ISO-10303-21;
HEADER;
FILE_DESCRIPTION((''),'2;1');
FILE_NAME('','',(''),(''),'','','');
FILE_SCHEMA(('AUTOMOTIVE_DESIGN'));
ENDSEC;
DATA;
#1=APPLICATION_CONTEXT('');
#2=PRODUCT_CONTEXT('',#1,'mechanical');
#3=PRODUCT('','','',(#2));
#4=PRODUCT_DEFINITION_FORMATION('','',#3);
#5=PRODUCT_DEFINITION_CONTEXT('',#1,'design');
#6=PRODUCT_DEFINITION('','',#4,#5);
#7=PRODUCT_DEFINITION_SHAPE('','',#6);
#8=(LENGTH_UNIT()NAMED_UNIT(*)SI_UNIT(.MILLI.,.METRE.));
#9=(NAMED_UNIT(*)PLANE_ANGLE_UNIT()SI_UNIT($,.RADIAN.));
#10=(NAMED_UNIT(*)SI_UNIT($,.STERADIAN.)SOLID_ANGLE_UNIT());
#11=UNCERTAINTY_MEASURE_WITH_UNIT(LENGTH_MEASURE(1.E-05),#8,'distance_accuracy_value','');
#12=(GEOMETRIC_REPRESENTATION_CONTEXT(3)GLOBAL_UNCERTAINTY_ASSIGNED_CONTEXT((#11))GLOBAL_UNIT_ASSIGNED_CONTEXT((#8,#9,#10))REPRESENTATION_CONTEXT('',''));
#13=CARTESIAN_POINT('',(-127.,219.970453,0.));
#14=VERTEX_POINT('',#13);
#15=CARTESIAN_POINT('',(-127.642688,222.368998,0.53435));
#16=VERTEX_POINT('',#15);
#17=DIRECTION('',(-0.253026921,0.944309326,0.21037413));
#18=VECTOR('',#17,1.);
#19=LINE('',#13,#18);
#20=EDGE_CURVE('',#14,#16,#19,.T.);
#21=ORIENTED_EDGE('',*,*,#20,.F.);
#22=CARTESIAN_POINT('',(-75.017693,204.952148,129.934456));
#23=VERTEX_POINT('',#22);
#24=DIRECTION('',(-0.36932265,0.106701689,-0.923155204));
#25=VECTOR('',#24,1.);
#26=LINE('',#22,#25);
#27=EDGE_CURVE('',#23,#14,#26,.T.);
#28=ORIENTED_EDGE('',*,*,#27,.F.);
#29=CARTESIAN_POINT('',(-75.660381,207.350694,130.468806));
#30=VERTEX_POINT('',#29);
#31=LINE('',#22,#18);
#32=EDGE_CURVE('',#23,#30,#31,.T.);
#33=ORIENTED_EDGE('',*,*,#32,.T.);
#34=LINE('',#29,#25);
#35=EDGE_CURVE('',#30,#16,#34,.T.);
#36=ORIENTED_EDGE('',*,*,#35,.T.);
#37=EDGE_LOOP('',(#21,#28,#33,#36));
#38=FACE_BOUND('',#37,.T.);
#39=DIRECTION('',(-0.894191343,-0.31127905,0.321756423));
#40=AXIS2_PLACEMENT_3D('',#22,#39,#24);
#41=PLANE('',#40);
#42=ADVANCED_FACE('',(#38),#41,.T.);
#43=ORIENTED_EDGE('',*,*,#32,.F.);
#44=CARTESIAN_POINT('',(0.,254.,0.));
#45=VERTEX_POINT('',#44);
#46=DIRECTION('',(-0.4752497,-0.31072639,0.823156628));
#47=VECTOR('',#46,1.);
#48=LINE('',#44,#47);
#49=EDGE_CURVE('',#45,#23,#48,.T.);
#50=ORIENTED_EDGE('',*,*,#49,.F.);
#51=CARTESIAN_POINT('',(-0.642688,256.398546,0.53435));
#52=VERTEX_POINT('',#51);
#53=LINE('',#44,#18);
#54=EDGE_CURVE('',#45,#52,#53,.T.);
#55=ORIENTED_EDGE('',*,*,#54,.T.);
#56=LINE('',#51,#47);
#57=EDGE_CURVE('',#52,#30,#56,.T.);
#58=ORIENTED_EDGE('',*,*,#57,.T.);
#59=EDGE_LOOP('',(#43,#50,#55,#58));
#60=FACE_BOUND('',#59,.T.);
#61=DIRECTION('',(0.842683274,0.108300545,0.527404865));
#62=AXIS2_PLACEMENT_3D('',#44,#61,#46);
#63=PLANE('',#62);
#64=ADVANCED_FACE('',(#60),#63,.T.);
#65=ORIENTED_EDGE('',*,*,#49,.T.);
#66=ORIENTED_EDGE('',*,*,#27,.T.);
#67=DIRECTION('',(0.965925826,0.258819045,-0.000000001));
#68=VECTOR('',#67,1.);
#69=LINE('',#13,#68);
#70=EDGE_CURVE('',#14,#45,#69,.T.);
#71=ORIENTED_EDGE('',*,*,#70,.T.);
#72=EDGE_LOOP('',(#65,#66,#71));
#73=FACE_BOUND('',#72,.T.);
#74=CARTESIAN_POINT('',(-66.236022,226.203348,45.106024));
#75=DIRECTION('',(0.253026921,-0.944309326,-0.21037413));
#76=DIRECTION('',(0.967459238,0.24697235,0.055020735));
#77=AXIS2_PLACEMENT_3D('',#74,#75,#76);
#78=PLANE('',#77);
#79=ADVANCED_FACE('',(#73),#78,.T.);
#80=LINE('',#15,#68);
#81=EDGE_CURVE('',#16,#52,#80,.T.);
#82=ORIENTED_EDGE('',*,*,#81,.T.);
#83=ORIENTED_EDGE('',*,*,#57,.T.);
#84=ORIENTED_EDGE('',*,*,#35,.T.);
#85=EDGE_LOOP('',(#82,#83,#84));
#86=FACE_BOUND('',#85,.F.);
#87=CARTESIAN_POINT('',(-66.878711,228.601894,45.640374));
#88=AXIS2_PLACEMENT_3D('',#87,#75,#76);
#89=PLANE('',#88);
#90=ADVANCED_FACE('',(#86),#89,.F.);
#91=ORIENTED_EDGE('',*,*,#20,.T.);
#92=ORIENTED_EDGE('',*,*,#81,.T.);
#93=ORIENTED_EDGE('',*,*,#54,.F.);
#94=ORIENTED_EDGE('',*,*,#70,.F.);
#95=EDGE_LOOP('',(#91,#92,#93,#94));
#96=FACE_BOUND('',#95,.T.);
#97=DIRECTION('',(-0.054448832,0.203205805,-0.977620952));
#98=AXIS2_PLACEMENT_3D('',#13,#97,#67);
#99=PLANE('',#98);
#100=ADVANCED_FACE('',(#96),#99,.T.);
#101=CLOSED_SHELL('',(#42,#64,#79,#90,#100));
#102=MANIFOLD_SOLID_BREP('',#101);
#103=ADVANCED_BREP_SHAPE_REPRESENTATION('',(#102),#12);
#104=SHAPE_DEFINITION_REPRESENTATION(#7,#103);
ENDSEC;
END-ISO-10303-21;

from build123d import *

# Parameters (mm, degrees)
F52_DEPTH = 2.54


# Not quite as in the source:
# - ends of sketch curves that miss each other by under 0.0002 mm in the source are joined


with BuildPart() as f52:
    # F51 (on 3pt) → F52 (new body)
    with BuildSketch(Plane(origin=(-60.6896630699, 226.4969060713, 50.4591961758), x_dir=(0.967459238, 0.2469723498, 0.055020735), z_dir=(0.2530269212, -0.9443093257, -0.2103741298))):
        Polygon((-14.8099569761, 82.2584406081), (-68.5407036056, -47.8326017287), (62.7309768684, -55.2323311128), align=None)
    extrude(amount=-F52_DEPTH)


solid = f52.part
